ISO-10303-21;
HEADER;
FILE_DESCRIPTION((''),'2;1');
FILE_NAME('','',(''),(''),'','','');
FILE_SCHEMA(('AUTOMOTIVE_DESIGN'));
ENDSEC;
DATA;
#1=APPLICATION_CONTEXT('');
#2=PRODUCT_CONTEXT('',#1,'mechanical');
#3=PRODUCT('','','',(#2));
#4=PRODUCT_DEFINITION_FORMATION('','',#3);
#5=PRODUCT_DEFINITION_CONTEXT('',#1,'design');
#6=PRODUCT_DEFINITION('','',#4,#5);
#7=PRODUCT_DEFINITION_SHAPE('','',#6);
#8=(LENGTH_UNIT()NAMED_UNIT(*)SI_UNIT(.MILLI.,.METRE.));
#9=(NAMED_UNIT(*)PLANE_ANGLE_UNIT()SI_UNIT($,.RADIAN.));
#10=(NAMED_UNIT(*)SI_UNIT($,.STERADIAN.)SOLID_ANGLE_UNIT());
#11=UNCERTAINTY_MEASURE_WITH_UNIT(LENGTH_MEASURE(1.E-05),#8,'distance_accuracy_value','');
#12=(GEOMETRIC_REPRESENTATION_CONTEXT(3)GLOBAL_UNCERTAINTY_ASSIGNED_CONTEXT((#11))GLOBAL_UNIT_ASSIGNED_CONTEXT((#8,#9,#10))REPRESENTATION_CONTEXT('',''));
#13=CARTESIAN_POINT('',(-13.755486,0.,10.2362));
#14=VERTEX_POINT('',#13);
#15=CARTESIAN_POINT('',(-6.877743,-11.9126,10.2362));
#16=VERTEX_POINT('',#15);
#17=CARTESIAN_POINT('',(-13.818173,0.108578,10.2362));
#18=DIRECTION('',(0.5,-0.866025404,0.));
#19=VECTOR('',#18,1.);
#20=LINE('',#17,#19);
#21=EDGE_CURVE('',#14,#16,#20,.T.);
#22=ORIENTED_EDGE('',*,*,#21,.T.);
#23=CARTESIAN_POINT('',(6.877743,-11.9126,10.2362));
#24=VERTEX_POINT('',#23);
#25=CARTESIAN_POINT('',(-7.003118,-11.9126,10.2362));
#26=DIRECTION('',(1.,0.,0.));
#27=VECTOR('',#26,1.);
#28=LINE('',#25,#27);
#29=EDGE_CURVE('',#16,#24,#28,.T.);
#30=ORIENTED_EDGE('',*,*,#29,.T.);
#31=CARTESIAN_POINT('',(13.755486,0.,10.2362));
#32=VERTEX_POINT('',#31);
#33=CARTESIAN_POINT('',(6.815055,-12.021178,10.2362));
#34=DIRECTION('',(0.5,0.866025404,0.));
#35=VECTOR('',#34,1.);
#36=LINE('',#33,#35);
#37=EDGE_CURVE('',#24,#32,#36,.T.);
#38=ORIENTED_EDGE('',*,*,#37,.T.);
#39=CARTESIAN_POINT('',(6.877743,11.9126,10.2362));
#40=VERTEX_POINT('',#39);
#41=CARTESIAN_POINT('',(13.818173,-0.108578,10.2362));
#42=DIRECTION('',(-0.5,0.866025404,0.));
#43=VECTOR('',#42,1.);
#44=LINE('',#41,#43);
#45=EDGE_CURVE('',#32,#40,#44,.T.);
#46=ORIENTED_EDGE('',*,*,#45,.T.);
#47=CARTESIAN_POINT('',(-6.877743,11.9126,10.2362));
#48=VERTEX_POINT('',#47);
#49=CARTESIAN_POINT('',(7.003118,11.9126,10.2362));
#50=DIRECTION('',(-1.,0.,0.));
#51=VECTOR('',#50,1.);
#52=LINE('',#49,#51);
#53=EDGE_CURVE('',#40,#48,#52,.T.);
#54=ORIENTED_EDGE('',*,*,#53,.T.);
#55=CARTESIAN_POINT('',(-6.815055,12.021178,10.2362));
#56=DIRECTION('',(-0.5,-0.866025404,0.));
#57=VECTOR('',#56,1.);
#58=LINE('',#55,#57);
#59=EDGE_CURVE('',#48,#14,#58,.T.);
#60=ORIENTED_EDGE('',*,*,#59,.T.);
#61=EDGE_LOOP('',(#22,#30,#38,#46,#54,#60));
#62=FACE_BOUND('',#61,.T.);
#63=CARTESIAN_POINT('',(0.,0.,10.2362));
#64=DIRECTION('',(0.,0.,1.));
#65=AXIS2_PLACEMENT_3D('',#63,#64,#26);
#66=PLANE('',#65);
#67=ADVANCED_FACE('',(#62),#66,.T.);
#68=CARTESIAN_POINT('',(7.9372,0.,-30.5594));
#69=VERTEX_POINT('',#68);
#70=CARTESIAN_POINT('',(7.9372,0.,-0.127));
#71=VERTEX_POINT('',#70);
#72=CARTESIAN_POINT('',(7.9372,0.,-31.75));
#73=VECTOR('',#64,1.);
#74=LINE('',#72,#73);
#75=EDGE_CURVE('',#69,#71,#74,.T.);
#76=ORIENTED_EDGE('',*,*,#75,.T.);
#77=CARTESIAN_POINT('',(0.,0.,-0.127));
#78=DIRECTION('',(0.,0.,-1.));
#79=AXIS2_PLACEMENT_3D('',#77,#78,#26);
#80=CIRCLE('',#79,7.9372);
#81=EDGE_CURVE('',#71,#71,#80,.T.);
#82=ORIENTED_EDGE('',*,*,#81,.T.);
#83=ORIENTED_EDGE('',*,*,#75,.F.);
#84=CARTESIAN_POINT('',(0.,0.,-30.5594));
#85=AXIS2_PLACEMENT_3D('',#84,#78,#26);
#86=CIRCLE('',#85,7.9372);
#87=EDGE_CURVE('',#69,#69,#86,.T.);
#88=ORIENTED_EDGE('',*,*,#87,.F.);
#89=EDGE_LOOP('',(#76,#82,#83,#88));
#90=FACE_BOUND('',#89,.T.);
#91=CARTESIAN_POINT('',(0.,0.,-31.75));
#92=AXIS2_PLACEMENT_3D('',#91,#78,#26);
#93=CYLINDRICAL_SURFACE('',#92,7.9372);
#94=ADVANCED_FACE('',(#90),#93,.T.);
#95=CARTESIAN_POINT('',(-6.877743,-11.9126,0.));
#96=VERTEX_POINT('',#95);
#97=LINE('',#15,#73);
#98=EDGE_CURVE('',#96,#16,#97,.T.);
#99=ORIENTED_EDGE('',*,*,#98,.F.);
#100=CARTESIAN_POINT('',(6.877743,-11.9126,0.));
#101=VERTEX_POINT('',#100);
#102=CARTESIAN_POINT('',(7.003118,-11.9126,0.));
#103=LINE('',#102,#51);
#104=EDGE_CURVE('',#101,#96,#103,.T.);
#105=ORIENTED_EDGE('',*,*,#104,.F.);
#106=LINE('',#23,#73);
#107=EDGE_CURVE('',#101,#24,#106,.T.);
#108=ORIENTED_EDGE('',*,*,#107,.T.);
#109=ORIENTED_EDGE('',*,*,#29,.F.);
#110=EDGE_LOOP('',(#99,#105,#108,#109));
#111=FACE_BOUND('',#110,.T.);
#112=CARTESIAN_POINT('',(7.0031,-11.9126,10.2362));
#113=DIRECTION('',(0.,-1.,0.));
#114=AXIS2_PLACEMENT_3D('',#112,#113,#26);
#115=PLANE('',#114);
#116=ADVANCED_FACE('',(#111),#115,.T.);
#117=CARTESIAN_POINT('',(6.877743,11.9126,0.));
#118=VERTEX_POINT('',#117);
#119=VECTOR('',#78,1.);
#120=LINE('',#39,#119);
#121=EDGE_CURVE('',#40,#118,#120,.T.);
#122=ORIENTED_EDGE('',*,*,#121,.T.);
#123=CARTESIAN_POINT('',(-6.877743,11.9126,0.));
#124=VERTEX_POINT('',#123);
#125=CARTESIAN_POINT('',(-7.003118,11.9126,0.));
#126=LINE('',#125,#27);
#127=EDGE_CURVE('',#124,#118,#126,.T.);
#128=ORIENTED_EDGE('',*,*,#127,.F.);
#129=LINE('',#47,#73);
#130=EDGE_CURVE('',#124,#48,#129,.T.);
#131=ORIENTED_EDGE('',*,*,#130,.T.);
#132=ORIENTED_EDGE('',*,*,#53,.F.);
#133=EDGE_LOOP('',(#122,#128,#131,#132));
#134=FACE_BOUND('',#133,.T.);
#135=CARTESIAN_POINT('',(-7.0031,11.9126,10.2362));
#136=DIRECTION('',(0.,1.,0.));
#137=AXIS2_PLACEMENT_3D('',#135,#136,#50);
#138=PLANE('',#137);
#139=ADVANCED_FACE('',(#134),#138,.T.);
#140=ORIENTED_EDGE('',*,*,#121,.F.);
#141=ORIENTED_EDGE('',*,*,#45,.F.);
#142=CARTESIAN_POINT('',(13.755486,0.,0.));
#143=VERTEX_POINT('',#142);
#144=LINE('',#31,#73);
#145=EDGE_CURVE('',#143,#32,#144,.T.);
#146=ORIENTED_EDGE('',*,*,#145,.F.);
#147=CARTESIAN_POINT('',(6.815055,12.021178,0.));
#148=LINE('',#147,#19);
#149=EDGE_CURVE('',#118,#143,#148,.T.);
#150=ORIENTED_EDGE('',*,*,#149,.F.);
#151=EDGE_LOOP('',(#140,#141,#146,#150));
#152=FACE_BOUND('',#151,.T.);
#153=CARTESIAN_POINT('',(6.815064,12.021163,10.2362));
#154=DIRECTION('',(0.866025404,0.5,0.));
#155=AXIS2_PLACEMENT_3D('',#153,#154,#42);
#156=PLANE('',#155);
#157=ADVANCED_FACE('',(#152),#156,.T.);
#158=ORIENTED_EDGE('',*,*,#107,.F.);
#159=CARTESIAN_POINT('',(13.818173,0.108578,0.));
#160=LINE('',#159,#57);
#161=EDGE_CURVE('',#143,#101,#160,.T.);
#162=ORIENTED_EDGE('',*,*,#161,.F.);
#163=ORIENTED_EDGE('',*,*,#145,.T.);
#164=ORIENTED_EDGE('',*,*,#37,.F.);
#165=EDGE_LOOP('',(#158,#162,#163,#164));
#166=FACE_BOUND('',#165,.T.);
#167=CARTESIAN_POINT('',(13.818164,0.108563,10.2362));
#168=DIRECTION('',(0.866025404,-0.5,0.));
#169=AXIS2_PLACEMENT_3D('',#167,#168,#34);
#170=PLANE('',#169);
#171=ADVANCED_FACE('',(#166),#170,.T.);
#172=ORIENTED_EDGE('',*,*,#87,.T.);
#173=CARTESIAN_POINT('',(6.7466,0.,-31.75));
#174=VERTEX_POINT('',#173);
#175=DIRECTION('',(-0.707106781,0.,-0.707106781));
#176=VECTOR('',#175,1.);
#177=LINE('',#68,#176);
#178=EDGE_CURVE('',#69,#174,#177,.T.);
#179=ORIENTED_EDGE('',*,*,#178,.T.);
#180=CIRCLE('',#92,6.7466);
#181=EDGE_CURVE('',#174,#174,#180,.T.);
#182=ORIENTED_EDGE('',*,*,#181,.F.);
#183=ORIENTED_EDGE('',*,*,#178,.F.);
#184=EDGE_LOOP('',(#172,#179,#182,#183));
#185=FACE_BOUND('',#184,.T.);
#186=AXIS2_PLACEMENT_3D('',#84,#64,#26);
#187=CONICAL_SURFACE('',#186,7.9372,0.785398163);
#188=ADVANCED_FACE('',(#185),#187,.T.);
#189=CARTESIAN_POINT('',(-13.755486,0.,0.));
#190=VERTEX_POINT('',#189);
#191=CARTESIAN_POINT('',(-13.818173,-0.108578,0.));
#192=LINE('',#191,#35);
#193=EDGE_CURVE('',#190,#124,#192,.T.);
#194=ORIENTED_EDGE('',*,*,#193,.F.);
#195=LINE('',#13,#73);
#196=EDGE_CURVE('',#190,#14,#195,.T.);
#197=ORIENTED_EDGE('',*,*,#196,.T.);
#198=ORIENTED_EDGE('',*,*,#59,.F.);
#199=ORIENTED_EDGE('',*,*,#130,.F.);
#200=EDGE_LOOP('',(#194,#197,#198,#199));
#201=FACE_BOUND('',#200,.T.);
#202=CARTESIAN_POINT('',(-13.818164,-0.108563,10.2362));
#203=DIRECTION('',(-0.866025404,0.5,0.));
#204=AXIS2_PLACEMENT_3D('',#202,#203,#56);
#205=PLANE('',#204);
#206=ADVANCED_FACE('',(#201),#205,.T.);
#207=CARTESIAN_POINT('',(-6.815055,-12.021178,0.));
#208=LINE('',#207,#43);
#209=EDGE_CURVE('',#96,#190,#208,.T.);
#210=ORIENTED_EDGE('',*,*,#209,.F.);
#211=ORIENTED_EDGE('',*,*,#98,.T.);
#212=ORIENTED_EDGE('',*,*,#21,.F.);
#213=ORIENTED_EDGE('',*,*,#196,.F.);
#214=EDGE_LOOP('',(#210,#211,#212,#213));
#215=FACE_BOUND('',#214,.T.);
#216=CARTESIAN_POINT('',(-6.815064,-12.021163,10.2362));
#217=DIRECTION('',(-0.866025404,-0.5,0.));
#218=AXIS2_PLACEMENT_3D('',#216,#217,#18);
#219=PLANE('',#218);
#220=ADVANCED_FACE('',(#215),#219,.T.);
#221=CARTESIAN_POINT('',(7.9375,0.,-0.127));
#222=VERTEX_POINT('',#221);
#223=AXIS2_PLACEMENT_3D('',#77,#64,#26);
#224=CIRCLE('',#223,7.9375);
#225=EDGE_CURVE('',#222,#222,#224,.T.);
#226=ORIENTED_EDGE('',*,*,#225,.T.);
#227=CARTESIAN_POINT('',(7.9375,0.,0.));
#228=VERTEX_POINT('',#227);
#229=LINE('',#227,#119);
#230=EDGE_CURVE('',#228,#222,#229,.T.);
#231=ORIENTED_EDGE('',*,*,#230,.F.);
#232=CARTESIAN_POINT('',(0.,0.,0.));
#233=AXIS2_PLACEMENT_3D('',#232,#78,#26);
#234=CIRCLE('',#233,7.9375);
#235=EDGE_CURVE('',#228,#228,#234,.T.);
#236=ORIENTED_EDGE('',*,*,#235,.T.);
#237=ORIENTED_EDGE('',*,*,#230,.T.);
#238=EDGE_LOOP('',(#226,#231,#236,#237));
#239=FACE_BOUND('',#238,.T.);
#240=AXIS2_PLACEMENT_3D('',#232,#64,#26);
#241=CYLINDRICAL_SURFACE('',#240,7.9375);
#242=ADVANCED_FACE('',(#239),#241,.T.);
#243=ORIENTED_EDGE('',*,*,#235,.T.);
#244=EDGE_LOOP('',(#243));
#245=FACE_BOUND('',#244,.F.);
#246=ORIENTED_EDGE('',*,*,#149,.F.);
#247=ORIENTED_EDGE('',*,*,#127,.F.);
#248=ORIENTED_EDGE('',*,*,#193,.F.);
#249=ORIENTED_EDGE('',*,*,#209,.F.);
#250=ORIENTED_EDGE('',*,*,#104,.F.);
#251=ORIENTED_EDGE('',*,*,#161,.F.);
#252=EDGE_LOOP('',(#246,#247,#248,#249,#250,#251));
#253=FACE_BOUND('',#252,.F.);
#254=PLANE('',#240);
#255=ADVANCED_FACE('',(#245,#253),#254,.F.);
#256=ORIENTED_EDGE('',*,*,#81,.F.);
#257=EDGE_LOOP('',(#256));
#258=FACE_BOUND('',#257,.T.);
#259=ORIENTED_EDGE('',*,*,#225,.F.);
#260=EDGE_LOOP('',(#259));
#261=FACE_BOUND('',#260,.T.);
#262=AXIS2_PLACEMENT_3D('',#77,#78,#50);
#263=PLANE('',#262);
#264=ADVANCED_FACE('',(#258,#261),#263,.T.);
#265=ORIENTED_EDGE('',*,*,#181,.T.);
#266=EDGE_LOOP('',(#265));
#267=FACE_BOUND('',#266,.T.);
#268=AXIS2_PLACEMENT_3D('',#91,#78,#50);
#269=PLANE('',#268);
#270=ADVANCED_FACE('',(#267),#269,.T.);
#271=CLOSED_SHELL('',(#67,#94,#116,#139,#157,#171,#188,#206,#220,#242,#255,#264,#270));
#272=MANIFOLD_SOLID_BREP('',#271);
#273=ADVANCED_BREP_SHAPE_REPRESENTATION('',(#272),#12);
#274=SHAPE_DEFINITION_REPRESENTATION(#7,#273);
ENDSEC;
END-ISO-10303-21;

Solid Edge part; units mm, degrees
sketch "Sketch1" plane through (0, 0, 0) normal (0, 0, 1) x (1, 0, 0)
  circle A0 centre (0, 0) radius 13.8186
  dimension "D1" = 27.6372
extrude "Protrusion1" add sketch "Sketch1" along normal blind 10.2362
sketch "Sketch2" plane through (0, 0, 0) normal (0, 0, -1) x (1, 0, 0)
  circle A0 centre (0, 0) radius 7.9375
extrude "Protrusion2" add sketch "Sketch2" along normal blind 31.75
sketch "Sketch3" plane through (0, 0, -31.75) normal (0, 0, -1) x (1, 0, 0)
  circle A0 centre (0, 0) radius 7.9372
extrude "Cutout1" cut sketch "Sketch3" against normal blind 31.623 flip side to cut
chamfer "Chamfer_1" distance 1.1906 angle 45 1 edges at (-7.9372, 0, -31.75)
sketch "Sketch4" plane through (0, 0, 10.2362) normal (0, 0, 1) x (1, 0, 0)
  line L0 (-7.0031, 11.9126) -> (7.0031, 11.9126)
  dimension "D1" = 23.8252
extrude "Cutout2" cut sketch "Sketch4" against normal up to next material side at (0, 11.9626, 10.2362)
pattern_circular "Pattern1" count 6 over 360 about axis through (0, 0, 10.2362) along (0, 0, 1) of "Cutout2"
properties part number "24100110"
